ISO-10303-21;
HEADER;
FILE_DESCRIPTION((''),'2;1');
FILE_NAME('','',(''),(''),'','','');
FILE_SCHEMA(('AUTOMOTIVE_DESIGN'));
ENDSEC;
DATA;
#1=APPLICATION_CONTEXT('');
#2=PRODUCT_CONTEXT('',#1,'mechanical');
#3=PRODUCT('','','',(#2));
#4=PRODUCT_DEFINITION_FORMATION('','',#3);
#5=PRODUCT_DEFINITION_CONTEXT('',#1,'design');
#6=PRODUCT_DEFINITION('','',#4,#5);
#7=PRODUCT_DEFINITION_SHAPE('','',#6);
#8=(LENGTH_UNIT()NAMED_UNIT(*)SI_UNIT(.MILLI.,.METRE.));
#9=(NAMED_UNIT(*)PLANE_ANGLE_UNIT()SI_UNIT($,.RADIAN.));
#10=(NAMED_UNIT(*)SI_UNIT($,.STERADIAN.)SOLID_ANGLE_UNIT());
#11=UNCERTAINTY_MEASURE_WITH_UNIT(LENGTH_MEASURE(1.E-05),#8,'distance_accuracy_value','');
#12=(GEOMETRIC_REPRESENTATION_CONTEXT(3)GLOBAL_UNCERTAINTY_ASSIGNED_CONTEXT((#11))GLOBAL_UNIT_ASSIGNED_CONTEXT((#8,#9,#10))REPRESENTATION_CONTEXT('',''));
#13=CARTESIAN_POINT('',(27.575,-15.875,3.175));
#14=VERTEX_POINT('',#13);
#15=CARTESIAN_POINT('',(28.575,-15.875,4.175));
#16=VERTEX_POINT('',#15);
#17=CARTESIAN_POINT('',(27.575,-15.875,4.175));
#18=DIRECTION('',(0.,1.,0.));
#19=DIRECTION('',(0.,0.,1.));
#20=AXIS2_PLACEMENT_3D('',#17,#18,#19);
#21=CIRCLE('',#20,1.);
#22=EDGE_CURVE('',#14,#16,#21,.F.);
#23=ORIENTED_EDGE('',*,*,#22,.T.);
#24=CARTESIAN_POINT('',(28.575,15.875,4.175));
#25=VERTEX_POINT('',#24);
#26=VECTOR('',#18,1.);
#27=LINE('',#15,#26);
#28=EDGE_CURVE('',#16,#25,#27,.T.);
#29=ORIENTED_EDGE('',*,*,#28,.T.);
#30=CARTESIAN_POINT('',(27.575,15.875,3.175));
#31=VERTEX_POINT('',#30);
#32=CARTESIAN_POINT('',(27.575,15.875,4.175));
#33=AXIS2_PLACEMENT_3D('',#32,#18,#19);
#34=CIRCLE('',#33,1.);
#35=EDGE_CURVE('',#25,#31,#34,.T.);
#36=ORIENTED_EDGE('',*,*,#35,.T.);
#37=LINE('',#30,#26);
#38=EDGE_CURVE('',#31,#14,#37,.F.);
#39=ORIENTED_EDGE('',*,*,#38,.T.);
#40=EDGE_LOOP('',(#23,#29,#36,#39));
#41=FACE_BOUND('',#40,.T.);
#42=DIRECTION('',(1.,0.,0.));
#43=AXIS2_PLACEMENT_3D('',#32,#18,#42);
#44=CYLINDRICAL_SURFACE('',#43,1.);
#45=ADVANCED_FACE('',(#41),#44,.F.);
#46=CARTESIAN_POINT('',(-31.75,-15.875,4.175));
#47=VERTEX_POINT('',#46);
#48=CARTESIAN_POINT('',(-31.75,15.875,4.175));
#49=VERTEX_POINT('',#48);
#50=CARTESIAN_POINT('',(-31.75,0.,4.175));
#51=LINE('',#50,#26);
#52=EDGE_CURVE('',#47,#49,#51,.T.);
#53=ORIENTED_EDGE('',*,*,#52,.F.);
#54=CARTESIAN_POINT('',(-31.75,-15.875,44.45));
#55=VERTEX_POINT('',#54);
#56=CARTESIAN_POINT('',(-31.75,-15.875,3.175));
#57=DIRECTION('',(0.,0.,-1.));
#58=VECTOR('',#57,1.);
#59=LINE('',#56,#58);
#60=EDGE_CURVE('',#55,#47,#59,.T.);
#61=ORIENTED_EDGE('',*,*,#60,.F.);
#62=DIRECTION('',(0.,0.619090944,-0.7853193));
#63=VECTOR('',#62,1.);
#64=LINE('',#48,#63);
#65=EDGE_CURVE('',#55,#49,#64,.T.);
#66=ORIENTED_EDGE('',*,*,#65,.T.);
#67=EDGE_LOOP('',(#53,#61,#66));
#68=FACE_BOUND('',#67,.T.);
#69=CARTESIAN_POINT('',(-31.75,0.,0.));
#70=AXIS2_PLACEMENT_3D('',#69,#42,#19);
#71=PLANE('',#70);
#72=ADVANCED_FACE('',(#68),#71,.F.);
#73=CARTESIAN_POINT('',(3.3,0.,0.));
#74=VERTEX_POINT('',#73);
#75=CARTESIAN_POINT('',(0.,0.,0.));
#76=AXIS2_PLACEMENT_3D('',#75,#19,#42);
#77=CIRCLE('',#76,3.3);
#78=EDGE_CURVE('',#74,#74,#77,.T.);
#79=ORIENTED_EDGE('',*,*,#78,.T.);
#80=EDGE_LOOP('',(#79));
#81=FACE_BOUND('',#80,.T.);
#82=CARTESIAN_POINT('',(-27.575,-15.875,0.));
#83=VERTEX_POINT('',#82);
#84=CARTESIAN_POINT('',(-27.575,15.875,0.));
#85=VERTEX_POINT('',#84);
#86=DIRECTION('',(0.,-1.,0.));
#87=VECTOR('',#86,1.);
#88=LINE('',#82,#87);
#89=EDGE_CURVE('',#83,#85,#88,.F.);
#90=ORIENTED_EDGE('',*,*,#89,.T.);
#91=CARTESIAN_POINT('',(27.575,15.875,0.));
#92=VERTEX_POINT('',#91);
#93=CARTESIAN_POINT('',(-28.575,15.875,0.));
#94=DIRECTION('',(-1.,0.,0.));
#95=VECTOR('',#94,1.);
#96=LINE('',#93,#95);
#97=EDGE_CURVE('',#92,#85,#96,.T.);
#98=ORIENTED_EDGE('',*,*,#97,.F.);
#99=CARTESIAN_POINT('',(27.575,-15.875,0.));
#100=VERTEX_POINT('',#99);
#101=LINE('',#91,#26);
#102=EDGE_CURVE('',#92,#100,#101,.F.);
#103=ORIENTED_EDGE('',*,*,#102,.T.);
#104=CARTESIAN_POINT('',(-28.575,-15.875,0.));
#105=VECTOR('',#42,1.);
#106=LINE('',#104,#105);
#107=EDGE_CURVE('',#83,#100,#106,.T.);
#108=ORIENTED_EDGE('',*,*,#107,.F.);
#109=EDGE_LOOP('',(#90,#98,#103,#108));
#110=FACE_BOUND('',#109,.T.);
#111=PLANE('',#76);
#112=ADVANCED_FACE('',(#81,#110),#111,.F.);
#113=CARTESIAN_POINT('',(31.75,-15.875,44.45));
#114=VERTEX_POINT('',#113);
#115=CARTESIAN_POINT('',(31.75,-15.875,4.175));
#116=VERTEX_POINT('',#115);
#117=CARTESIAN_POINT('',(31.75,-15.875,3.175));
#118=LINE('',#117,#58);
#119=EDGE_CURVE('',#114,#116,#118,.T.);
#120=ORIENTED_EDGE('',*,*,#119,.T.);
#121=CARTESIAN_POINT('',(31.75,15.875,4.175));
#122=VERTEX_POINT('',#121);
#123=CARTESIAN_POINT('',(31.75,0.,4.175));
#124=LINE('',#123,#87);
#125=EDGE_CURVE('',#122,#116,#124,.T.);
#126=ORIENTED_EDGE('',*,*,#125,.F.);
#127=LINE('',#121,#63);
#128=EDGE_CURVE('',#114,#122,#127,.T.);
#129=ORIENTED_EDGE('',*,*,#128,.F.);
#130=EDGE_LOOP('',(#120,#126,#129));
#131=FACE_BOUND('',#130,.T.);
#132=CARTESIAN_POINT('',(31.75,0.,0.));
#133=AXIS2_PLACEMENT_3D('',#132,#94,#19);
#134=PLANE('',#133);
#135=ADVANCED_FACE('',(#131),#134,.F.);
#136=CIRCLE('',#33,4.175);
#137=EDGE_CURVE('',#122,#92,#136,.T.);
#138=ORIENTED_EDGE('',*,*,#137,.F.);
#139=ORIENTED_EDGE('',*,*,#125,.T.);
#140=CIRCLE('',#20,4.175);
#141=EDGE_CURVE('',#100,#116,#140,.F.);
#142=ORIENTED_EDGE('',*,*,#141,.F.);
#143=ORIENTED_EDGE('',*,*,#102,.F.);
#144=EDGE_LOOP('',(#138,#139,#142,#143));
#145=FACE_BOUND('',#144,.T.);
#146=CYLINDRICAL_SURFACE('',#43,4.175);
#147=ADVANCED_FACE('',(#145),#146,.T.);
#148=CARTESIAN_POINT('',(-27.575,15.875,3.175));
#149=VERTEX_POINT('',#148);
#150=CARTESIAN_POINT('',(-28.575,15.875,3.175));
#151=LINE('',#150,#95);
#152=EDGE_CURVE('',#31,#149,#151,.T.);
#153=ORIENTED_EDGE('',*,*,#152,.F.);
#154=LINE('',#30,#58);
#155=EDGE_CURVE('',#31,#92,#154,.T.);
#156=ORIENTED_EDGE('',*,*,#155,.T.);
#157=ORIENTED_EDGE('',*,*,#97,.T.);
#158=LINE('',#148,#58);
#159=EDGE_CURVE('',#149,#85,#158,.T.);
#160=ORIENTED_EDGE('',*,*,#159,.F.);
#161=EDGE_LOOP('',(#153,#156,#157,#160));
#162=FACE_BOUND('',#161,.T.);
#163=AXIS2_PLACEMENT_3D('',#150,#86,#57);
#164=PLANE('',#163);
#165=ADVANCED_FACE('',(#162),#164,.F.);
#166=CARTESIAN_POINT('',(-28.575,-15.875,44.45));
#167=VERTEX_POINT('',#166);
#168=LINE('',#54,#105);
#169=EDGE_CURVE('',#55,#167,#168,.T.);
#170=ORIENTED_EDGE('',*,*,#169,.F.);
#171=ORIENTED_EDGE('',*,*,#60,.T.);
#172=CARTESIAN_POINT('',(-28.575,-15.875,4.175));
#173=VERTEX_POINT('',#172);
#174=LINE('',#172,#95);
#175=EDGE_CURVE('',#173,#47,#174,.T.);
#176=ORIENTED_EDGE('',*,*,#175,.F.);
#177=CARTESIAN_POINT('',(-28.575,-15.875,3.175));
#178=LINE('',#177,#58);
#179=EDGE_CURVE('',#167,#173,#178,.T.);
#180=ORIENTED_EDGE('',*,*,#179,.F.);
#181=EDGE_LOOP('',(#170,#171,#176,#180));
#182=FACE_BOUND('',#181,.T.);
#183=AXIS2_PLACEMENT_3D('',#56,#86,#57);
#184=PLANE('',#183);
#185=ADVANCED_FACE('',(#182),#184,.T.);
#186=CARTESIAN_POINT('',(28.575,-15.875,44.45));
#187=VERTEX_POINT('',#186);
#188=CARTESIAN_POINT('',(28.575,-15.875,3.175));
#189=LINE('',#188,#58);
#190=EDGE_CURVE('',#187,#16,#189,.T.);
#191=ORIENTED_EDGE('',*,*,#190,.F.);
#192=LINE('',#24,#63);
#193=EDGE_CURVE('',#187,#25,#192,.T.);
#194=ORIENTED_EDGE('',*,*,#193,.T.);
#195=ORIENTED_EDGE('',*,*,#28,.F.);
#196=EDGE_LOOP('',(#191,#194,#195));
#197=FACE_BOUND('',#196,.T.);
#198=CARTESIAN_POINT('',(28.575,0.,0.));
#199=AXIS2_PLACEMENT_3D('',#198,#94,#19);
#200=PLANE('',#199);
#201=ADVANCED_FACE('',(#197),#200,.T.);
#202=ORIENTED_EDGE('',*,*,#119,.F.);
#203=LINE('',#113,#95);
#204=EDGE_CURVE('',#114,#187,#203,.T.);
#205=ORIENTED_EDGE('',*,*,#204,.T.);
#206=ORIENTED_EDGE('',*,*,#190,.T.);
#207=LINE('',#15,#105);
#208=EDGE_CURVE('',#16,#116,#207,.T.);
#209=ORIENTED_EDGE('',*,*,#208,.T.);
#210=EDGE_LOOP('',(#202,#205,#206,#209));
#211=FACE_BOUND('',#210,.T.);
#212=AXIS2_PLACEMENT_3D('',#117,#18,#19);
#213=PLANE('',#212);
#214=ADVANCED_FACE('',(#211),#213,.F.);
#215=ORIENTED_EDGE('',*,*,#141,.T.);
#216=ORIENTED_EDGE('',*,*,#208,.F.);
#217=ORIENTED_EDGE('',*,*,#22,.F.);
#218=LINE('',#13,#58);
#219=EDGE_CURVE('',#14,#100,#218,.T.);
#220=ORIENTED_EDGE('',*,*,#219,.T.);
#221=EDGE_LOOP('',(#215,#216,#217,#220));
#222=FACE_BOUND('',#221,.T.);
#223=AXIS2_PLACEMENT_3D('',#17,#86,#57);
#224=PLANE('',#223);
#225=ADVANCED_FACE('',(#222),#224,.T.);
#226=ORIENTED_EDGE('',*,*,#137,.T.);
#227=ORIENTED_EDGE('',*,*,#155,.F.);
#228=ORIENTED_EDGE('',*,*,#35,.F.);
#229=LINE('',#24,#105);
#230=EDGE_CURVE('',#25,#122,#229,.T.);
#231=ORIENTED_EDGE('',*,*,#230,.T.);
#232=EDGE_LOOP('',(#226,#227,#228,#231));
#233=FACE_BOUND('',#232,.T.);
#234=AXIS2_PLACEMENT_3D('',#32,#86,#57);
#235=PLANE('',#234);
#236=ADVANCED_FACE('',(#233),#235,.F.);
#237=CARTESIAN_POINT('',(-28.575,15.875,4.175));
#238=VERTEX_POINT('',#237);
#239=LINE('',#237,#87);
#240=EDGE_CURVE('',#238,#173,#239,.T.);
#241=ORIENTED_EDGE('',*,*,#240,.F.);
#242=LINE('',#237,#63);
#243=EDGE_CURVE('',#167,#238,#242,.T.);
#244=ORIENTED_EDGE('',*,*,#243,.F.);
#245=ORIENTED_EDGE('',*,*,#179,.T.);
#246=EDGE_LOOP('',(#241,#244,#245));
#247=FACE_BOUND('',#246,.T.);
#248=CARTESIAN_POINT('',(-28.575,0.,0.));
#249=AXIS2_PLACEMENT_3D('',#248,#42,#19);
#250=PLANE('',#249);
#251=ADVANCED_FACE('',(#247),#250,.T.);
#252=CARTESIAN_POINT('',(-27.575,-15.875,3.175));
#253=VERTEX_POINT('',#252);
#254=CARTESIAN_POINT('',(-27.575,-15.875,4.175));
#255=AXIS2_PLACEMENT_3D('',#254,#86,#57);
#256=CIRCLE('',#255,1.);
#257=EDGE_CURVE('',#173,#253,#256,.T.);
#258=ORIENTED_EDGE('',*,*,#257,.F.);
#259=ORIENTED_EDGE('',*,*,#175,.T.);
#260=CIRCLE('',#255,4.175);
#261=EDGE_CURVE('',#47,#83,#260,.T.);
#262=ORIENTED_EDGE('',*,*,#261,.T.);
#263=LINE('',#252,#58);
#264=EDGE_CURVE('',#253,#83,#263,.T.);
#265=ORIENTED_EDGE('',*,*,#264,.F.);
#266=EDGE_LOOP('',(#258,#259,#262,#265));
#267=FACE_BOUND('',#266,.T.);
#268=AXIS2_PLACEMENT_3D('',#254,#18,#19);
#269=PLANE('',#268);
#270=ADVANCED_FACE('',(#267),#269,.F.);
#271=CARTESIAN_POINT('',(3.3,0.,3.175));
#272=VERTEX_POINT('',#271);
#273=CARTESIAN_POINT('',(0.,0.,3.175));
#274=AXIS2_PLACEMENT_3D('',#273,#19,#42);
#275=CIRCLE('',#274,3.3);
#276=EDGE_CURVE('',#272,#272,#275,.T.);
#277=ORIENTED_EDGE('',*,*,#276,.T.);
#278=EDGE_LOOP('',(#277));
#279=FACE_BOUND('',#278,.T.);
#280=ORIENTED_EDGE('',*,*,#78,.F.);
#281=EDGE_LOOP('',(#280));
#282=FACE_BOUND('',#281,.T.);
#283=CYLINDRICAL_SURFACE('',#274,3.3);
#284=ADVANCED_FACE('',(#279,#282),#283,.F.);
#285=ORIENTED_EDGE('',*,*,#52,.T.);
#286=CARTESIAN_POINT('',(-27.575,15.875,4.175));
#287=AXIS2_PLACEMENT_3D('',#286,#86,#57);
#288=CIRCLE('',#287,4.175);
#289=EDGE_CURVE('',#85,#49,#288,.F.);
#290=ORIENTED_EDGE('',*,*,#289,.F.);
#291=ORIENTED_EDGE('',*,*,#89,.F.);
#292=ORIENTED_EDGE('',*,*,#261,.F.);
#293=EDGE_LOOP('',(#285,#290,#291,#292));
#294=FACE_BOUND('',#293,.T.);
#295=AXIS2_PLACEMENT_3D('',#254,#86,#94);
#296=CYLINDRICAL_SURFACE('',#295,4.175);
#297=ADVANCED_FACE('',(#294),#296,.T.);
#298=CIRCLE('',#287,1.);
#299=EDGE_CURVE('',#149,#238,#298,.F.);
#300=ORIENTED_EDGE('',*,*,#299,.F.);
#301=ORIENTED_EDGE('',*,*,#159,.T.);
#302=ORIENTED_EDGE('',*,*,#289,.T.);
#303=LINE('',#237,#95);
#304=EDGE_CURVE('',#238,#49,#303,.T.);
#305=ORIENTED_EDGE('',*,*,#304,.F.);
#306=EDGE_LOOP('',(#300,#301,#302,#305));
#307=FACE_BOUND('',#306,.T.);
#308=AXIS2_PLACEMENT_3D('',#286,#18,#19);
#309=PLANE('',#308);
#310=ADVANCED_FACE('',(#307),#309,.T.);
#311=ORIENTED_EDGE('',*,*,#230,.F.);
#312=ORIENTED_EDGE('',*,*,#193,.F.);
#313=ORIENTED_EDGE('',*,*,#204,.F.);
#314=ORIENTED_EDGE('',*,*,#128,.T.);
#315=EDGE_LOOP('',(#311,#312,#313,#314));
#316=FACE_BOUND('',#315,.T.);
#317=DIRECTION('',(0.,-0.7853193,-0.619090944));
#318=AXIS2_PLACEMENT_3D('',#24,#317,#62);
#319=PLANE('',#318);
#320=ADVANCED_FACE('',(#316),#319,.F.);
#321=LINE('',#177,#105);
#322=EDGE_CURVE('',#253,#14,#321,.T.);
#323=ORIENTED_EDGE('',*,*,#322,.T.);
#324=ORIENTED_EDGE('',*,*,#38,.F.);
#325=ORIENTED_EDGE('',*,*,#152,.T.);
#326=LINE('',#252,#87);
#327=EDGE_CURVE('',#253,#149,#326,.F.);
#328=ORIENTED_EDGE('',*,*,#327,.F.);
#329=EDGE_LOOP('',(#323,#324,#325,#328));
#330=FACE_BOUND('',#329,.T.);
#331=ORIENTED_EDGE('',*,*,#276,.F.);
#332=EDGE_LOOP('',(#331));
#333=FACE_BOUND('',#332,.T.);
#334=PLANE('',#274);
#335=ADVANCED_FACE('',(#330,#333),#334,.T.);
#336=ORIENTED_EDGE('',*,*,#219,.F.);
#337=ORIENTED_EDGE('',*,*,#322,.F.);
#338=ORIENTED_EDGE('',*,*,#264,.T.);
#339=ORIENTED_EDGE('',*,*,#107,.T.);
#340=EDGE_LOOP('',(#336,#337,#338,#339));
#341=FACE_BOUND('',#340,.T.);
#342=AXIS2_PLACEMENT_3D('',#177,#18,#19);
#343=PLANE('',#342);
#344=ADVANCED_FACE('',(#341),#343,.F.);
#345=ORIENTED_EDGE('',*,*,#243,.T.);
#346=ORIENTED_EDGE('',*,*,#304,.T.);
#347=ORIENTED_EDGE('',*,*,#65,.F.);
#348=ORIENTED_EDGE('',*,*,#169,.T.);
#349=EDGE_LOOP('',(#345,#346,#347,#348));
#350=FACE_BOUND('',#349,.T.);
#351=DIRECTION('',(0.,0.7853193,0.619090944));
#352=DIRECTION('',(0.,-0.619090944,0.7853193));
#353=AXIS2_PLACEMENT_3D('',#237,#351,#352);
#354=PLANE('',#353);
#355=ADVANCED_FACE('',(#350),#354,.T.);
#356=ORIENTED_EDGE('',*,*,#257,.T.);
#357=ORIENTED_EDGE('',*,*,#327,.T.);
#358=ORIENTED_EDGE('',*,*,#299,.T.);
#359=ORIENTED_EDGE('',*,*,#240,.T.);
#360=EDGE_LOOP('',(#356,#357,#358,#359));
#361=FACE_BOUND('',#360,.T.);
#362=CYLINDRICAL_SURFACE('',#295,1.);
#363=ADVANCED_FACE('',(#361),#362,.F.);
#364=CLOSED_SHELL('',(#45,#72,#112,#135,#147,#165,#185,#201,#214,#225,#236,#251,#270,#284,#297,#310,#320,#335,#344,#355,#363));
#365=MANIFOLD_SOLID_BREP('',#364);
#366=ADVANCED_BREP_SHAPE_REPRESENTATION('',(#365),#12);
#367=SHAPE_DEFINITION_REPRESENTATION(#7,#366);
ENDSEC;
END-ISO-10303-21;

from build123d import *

# Parameters (mm, degrees)
SKETCH2_W                    = 57.15
SKETCH2_H                    = 31.75
BASE_FLANGE1_DEPTH           = 3.175
EDGE_FLANGE1_STRIP_W         = 14.7
EDGE_FLANGE1_STRIP_H         = 3.175
EDGE_FLANGE1_STRIP_CUT_DEPTH = 31.75
EDGE_FLANGE1_DEPTH           = 31.75
CUT_EXTRUDE1_DEPTH           = 3.175
M6_CLEARANCE_HOLE1_D         = 6.6


# Sheet-metal steps are written as plain solids
with BuildPart() as part:
    # Sketch2 → Base-Flange1 (new body)
    with BuildSketch(Plane.XY):
        Rectangle(SKETCH2_W, SKETCH2_H)
    extrude(amount=BASE_FLANGE1_DEPTH)

    # Edge-Flange1 strip (across the edge) → Edge-Flange1 strip cut (cut)
    with BuildSketch(Plane(origin=(28.575, -15.875, 3.175), x_dir=(-1, 0, 0), z_dir=(0, 1, 0))):
        with Locations((-6.35, -1.5875)):
            Rectangle(EDGE_FLANGE1_STRIP_W, EDGE_FLANGE1_STRIP_H)
    edge_flange1_strip_cut = extrude(amount=EDGE_FLANGE1_STRIP_CUT_DEPTH, mode=Mode.SUBTRACT)

    # Edge-Flange1 section (across the edge) → Edge-Flange1 (add)
    with BuildSketch(Plane(origin=(28.575, -15.875, 3.175), x_dir=(-1, 0, 0), z_dir=(0, 1, 0))):
        with BuildLine():
            Line((-3.175, 1), (-3.175, 41.275))
            Line((-3.175, 41.275), (0, 41.275))
            Line((0, 41.275), (0, 1))
            ThreePointArc((0, 1), (0.292893219, 0.292893219), (1, 0))
            Line((1, 0), (1, -3.175))
            ThreePointArc((1, -3.175), (-1.952170811, -1.952170811), (-3.175, 1))
        make_face()
    edge_flange1 = extrude(amount=EDGE_FLANGE1_DEPTH)

    # Sketch10 → Cut-Extrude1 (cut)
    with BuildSketch(Plane(origin=(31.75, 0, 0), x_dir=(0, 0, -1), z_dir=(1, 0, 0))):
        Polygon((-4.175, 15.875), (-44.45, -15.875), (-44.45, 15.875), align=None)
    cut_extrude1 = extrude(amount=-CUT_EXTRUDE1_DEPTH, mode=Mode.SUBTRACT)

    # Mirror1: Edge-Flange1 strip cut, Edge-Flange1, Cut-Extrude1 across plane
    add(edge_flange1_strip_cut.mirror(Plane(origin=(0, 0, 0), x_dir=(0, 0, 1), z_dir=(1, 0, 0))), mode=Mode.SUBTRACT)
    add(edge_flange1.mirror(Plane(origin=(0, 0, 0), x_dir=(0, 0, 1), z_dir=(1, 0, 0))))
    add(cut_extrude1.mirror(Plane(origin=(0, 0, 0), x_dir=(0, 0, 1), z_dir=(1, 0, 0))), mode=Mode.SUBTRACT)

    # M6 Clearance Hole1 (through all)
    with Locations(Plane.XY.offset(3.175)):
        with Locations((0, 0)):
            Hole(M6_CLEARANCE_HOLE1_D / 2)


solid = part.part
